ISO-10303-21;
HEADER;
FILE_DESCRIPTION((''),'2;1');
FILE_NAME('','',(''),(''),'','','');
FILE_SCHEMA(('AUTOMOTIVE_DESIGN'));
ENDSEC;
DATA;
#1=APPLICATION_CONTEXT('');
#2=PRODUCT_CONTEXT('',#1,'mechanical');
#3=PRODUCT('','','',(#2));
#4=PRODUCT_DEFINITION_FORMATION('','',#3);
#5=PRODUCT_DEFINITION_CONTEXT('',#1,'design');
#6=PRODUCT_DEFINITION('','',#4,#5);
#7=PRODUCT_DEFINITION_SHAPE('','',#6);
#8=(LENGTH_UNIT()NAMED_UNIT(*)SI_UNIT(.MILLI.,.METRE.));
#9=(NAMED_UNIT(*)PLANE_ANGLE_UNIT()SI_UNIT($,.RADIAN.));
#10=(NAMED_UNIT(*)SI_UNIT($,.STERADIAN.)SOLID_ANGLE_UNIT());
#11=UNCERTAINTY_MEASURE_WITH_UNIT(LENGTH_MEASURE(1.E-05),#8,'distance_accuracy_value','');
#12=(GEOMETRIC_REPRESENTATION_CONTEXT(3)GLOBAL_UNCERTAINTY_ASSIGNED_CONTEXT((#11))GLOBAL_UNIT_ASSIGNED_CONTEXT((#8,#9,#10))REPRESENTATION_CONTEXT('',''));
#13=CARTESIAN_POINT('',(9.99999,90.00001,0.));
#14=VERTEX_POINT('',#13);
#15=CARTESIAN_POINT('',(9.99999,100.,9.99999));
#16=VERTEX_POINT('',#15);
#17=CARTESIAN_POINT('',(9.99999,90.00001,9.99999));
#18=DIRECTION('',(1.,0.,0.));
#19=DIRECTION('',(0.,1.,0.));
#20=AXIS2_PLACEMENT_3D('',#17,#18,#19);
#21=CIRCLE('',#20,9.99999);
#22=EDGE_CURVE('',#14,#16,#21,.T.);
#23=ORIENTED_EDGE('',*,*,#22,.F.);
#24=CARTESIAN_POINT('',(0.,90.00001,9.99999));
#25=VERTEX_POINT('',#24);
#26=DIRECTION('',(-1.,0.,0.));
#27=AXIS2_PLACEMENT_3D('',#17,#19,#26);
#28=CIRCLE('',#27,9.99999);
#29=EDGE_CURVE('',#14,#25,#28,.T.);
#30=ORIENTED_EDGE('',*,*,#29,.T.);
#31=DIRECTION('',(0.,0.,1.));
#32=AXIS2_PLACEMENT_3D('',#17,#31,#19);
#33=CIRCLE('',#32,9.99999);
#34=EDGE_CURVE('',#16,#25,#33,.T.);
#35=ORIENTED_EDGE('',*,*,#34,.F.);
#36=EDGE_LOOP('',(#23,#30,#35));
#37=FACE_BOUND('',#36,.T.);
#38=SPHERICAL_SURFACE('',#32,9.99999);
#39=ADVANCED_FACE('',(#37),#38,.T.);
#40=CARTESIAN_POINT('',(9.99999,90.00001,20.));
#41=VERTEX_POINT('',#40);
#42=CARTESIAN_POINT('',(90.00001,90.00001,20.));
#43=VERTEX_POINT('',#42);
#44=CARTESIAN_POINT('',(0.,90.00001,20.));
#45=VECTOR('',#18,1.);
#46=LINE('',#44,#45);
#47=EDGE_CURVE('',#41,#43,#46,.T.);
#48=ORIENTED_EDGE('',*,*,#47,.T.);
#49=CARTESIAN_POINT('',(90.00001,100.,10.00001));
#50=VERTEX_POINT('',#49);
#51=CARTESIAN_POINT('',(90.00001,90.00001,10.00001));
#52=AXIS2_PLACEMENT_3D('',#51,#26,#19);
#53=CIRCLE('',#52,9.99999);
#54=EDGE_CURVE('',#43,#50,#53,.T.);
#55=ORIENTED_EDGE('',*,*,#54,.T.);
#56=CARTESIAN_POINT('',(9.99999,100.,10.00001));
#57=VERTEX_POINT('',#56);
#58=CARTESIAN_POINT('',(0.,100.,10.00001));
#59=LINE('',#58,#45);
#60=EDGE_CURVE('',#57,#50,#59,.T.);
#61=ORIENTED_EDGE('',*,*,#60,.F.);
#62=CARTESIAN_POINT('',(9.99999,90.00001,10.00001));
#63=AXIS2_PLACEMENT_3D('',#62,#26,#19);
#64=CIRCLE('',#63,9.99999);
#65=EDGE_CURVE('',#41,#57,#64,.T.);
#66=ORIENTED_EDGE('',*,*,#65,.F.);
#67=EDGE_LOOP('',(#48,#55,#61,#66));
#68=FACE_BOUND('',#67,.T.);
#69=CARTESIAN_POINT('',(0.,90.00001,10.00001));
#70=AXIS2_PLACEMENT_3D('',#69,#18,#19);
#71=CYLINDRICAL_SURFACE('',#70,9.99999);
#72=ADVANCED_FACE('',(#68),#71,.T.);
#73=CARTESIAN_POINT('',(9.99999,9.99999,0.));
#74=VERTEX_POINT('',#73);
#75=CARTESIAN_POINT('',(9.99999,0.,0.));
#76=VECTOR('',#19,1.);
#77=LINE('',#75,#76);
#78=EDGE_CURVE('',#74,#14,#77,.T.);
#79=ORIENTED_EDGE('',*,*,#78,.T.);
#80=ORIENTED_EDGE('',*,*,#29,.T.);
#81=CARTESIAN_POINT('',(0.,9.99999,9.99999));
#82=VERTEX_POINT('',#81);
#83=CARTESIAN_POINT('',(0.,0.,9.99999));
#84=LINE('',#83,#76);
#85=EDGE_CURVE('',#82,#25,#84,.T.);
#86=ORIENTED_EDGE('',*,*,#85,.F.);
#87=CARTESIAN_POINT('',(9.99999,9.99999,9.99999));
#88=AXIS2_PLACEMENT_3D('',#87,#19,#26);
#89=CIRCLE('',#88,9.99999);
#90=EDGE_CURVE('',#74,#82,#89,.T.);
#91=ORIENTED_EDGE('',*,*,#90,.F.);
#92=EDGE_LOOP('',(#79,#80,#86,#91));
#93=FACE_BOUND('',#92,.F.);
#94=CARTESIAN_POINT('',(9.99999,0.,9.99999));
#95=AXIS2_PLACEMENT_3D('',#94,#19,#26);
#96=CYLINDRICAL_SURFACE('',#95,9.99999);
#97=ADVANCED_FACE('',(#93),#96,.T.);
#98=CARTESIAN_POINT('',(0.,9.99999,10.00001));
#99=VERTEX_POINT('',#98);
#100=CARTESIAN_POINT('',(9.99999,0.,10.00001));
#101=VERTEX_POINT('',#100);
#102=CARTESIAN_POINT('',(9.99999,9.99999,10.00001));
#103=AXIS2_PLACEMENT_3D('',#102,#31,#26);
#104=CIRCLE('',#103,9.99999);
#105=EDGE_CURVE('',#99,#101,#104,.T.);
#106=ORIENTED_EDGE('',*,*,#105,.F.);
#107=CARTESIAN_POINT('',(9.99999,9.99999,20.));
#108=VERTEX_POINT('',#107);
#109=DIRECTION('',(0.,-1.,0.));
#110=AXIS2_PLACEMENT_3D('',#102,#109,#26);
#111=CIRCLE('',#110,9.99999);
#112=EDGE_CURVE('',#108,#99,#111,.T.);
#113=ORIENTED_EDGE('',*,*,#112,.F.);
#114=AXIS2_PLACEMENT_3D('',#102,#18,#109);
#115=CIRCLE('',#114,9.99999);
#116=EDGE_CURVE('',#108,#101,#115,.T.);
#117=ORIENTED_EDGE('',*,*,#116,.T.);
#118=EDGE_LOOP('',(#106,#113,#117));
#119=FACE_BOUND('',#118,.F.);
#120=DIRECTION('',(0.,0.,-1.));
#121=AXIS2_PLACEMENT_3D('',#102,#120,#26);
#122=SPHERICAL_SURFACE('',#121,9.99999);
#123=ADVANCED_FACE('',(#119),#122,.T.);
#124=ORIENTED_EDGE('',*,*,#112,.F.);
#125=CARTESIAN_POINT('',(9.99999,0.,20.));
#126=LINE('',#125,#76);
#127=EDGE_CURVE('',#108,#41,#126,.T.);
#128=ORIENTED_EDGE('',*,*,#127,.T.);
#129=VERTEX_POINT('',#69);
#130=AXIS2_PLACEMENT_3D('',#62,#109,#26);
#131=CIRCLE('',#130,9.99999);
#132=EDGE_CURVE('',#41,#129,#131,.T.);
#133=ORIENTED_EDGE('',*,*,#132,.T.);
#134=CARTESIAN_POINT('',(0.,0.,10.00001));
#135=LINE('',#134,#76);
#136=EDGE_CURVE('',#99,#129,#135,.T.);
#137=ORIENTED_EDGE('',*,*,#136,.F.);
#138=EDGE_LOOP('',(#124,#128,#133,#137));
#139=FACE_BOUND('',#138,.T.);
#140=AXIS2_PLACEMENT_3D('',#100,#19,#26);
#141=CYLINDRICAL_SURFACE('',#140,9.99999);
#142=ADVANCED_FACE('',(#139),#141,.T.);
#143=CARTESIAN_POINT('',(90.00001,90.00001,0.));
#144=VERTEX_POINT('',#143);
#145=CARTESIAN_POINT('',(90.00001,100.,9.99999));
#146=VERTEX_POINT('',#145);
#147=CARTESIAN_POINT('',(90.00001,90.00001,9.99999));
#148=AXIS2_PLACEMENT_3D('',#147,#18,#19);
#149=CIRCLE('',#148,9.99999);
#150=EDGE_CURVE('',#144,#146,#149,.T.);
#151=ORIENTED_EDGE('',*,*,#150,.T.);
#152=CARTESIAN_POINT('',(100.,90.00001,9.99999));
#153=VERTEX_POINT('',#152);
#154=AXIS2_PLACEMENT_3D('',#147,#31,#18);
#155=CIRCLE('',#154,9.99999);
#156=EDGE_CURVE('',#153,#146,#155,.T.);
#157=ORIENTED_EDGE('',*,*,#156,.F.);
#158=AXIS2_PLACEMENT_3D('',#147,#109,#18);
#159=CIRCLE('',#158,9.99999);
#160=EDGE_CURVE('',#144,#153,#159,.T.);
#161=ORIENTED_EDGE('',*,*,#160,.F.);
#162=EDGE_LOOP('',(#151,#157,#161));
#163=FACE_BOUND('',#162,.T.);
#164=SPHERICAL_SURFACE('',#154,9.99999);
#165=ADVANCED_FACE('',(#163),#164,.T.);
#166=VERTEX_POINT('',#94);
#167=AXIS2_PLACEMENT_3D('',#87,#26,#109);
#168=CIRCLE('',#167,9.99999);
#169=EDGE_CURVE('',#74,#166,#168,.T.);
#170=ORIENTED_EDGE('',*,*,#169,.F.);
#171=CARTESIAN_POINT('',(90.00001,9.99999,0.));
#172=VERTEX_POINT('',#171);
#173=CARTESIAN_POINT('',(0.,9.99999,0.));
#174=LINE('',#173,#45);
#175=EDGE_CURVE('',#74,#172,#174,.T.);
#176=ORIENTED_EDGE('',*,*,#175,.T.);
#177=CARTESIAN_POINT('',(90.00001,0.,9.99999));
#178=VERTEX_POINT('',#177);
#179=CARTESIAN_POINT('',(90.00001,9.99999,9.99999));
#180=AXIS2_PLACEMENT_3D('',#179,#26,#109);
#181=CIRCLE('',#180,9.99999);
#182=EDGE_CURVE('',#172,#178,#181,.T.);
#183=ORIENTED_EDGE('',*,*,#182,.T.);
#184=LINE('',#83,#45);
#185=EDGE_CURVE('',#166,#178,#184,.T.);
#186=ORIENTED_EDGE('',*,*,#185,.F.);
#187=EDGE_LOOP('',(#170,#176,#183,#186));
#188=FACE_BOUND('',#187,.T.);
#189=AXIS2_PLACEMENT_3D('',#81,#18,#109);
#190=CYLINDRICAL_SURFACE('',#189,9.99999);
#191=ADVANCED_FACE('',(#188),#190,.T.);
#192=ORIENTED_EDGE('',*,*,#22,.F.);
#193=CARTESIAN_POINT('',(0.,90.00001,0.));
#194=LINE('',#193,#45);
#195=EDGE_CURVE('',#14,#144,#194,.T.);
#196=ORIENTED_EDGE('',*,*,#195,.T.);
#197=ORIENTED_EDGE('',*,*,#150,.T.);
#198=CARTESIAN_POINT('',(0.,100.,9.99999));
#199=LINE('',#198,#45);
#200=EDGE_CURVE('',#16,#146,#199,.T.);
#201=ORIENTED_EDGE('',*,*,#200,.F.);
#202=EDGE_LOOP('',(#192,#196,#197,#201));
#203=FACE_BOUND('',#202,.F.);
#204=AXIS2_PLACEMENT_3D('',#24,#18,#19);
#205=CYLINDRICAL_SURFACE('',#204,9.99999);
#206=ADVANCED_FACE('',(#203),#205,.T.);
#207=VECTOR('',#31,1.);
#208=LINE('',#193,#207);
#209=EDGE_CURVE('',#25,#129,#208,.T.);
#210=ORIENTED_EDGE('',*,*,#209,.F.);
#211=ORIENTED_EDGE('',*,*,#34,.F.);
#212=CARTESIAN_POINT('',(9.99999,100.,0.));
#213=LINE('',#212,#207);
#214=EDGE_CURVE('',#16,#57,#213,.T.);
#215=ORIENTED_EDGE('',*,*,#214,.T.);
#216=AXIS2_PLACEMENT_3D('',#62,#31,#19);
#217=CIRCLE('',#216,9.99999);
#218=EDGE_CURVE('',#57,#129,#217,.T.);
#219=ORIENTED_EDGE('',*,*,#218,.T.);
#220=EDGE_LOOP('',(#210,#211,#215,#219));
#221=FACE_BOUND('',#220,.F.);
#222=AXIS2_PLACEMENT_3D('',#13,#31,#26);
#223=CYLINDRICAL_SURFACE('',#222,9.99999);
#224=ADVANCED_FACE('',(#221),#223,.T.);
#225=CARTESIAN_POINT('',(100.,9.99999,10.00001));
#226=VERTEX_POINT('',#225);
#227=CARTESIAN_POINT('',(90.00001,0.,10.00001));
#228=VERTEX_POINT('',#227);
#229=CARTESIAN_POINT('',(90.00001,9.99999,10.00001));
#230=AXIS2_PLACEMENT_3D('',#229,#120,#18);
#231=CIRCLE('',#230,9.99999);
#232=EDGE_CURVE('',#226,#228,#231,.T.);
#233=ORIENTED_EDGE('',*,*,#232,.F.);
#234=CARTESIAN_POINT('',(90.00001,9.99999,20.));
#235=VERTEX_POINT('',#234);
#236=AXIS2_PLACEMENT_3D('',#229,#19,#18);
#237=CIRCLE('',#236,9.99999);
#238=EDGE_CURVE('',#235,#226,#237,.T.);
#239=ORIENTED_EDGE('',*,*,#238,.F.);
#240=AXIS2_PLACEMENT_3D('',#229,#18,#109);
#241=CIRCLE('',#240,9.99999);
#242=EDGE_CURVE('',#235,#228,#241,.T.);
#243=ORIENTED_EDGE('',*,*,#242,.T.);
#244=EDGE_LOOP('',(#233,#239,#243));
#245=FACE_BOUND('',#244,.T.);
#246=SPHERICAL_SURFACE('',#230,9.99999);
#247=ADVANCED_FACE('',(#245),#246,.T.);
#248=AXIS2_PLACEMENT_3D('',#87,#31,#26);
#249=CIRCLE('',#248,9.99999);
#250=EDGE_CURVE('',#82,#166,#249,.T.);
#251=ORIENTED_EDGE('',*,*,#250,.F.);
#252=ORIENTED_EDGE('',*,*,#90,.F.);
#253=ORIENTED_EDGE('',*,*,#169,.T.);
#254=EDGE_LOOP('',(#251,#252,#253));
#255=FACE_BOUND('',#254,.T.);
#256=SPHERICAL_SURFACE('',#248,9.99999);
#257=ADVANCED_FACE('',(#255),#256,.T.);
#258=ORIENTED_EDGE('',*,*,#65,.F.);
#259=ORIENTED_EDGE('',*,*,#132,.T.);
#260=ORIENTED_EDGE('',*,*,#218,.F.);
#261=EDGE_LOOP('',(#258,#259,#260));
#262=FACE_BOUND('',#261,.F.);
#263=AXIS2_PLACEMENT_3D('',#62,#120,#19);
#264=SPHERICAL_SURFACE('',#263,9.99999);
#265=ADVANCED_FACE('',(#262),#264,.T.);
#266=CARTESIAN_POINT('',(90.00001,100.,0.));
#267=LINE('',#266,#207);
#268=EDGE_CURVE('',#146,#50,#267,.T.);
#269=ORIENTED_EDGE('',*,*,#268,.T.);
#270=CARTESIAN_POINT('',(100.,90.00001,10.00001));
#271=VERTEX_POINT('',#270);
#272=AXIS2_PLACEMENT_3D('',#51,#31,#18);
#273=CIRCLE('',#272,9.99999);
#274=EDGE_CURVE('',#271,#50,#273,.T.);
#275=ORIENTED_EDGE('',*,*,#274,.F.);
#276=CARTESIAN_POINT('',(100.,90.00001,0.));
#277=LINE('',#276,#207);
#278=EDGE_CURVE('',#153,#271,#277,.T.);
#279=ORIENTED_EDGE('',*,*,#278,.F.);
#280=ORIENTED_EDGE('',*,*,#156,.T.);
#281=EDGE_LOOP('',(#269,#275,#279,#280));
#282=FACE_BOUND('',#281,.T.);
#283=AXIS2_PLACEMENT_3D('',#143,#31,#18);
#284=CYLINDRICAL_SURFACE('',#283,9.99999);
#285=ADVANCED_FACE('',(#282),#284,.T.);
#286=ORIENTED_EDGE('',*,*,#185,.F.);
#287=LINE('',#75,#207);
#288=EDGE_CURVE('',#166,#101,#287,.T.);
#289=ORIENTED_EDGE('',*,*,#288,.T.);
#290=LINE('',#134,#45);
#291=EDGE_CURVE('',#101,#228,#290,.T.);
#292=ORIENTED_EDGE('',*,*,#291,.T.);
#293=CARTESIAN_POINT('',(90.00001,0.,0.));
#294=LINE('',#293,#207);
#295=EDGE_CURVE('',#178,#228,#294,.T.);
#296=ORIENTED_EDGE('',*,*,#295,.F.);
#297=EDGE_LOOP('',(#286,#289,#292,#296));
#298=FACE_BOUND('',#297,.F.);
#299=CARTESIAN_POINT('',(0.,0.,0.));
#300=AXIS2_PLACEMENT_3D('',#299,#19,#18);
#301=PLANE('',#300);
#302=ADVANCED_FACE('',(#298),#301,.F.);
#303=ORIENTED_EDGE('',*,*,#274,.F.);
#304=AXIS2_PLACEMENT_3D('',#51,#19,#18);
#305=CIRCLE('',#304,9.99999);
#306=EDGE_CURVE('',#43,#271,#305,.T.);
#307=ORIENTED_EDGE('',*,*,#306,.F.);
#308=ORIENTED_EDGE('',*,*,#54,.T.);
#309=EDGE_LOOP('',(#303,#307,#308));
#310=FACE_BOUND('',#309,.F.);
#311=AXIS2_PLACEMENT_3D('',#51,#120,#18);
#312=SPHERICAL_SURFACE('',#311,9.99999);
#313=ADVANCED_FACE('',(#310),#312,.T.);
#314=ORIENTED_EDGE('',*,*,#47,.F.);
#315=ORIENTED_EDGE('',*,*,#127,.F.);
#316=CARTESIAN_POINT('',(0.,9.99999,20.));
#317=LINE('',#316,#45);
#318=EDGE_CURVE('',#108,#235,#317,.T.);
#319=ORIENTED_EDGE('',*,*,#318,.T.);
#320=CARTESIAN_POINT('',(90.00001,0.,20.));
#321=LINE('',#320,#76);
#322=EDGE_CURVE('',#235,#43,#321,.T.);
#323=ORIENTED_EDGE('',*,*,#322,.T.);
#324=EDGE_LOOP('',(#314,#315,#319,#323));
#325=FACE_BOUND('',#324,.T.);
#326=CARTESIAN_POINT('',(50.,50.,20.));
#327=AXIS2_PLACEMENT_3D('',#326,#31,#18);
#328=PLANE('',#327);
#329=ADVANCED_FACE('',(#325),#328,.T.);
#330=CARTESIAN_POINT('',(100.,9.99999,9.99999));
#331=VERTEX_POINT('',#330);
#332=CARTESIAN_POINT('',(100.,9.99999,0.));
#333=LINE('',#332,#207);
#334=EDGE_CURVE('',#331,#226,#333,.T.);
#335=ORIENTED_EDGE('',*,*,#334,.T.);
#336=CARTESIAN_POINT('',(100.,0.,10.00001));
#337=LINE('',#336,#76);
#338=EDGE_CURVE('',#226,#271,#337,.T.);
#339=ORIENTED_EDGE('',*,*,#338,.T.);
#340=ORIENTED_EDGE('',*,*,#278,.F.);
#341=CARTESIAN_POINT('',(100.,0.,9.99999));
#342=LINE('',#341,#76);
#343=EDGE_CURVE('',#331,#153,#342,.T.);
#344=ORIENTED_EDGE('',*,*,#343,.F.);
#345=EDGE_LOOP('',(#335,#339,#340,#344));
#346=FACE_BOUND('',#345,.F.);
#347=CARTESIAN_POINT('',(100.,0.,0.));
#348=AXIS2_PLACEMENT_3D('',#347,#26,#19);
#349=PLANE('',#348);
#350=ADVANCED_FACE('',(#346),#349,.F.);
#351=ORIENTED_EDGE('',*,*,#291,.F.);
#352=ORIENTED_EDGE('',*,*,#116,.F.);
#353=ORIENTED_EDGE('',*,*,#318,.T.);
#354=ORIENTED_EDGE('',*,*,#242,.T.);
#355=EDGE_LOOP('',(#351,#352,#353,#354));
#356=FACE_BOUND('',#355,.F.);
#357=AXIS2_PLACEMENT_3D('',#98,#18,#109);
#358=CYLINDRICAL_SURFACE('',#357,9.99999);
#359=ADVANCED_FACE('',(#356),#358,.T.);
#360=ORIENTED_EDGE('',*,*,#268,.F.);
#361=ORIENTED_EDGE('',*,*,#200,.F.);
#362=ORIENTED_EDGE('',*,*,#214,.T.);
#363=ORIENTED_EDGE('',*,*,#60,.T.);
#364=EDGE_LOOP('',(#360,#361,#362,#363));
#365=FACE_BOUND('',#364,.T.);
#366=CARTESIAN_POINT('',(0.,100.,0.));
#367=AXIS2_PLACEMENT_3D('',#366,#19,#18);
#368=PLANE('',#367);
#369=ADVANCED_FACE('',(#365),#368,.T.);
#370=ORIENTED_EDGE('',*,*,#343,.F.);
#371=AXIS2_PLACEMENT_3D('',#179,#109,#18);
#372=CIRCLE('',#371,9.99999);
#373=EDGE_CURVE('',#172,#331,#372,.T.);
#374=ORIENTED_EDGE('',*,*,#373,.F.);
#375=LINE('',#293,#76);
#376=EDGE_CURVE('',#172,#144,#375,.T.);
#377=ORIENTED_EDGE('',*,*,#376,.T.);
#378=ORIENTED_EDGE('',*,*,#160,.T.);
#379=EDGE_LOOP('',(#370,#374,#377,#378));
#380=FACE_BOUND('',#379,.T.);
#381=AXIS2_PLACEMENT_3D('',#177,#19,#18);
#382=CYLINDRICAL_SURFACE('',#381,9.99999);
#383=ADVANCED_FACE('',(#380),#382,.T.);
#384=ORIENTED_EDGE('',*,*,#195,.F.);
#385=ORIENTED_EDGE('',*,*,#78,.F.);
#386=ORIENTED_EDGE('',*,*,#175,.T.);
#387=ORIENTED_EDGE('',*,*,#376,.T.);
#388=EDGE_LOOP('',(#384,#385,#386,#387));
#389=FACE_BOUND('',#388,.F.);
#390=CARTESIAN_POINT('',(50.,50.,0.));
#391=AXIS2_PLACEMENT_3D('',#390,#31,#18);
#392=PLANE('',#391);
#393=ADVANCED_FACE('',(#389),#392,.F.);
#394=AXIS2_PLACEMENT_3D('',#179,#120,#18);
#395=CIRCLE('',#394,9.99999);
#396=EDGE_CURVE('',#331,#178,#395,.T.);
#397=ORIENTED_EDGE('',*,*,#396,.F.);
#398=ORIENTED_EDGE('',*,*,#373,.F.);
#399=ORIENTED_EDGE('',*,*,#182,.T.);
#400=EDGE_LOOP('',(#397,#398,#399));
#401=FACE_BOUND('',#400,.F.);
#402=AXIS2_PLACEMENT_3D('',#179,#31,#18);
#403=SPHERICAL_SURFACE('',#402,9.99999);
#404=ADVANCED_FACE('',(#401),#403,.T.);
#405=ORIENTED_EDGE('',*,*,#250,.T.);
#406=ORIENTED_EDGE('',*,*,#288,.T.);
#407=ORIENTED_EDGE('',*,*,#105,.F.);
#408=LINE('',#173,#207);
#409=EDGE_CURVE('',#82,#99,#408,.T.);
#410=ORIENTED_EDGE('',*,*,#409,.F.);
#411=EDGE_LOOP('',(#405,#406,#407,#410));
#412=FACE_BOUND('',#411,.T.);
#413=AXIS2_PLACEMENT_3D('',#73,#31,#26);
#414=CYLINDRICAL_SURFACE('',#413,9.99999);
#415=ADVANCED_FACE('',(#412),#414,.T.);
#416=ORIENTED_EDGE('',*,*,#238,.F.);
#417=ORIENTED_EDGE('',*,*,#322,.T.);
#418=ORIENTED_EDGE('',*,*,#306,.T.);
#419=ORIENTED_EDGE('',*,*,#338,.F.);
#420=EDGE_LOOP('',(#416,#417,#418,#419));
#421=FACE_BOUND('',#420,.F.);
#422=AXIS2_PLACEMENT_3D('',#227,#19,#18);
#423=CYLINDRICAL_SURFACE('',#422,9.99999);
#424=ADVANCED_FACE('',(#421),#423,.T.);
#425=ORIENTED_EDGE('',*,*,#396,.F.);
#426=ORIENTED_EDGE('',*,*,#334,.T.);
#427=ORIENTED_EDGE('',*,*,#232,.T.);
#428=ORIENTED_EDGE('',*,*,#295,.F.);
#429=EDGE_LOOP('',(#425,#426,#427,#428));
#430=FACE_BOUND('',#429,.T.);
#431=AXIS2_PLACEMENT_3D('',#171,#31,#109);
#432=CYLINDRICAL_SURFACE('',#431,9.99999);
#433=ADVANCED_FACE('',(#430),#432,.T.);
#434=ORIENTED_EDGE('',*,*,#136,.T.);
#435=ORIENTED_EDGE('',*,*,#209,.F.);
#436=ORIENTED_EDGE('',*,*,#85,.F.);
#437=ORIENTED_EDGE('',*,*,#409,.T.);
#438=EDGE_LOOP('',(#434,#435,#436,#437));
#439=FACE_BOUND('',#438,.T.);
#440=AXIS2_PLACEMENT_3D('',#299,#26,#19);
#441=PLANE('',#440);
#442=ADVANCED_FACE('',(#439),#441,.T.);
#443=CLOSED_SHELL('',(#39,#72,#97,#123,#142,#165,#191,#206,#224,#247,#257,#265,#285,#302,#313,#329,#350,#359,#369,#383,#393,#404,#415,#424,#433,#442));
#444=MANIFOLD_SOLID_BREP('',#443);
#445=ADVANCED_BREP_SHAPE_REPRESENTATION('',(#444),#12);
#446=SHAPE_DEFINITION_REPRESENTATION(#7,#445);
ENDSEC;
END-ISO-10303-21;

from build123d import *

# Parameters (mm, degrees)
F0_W     = 100
F0_H     = 100
F1_DEPTH = 20
F2_R     = 9.99999


# Not quite as in the source:
# - a fillet or chamfer is up to 0.001 mm smaller than in the source, because OpenCascade refuses the exact size


with BuildPart() as f1:
    # F0 (on Top) → F1 (new body)
    with BuildSketch(Plane.XY):
        with Locations((50, 50)):
            Rectangle(F0_W, F0_H)
    extrude(amount=F1_DEPTH)

    # F2 (radius 10 in the source; OpenCascade refuses exactly that, so slightly less here)
    f2_edges = [f1.edges().sort_by_distance(p)[0] for p in [
        (100, 0, 10),
        (100, 100, 10),
        (100, 50, 0),
        (100, 50, 20),
        (0, 100, 10),
        (50, 100, 0),
        (50, 100, 20),
        (0, 0, 10),
        (0, 50, 0),
        (0, 50, 20),
        (50, 0, 0),
        (50, 0, 20),
    ]]
    fillet(f2_edges, radius=F2_R)


solid = f1.part
